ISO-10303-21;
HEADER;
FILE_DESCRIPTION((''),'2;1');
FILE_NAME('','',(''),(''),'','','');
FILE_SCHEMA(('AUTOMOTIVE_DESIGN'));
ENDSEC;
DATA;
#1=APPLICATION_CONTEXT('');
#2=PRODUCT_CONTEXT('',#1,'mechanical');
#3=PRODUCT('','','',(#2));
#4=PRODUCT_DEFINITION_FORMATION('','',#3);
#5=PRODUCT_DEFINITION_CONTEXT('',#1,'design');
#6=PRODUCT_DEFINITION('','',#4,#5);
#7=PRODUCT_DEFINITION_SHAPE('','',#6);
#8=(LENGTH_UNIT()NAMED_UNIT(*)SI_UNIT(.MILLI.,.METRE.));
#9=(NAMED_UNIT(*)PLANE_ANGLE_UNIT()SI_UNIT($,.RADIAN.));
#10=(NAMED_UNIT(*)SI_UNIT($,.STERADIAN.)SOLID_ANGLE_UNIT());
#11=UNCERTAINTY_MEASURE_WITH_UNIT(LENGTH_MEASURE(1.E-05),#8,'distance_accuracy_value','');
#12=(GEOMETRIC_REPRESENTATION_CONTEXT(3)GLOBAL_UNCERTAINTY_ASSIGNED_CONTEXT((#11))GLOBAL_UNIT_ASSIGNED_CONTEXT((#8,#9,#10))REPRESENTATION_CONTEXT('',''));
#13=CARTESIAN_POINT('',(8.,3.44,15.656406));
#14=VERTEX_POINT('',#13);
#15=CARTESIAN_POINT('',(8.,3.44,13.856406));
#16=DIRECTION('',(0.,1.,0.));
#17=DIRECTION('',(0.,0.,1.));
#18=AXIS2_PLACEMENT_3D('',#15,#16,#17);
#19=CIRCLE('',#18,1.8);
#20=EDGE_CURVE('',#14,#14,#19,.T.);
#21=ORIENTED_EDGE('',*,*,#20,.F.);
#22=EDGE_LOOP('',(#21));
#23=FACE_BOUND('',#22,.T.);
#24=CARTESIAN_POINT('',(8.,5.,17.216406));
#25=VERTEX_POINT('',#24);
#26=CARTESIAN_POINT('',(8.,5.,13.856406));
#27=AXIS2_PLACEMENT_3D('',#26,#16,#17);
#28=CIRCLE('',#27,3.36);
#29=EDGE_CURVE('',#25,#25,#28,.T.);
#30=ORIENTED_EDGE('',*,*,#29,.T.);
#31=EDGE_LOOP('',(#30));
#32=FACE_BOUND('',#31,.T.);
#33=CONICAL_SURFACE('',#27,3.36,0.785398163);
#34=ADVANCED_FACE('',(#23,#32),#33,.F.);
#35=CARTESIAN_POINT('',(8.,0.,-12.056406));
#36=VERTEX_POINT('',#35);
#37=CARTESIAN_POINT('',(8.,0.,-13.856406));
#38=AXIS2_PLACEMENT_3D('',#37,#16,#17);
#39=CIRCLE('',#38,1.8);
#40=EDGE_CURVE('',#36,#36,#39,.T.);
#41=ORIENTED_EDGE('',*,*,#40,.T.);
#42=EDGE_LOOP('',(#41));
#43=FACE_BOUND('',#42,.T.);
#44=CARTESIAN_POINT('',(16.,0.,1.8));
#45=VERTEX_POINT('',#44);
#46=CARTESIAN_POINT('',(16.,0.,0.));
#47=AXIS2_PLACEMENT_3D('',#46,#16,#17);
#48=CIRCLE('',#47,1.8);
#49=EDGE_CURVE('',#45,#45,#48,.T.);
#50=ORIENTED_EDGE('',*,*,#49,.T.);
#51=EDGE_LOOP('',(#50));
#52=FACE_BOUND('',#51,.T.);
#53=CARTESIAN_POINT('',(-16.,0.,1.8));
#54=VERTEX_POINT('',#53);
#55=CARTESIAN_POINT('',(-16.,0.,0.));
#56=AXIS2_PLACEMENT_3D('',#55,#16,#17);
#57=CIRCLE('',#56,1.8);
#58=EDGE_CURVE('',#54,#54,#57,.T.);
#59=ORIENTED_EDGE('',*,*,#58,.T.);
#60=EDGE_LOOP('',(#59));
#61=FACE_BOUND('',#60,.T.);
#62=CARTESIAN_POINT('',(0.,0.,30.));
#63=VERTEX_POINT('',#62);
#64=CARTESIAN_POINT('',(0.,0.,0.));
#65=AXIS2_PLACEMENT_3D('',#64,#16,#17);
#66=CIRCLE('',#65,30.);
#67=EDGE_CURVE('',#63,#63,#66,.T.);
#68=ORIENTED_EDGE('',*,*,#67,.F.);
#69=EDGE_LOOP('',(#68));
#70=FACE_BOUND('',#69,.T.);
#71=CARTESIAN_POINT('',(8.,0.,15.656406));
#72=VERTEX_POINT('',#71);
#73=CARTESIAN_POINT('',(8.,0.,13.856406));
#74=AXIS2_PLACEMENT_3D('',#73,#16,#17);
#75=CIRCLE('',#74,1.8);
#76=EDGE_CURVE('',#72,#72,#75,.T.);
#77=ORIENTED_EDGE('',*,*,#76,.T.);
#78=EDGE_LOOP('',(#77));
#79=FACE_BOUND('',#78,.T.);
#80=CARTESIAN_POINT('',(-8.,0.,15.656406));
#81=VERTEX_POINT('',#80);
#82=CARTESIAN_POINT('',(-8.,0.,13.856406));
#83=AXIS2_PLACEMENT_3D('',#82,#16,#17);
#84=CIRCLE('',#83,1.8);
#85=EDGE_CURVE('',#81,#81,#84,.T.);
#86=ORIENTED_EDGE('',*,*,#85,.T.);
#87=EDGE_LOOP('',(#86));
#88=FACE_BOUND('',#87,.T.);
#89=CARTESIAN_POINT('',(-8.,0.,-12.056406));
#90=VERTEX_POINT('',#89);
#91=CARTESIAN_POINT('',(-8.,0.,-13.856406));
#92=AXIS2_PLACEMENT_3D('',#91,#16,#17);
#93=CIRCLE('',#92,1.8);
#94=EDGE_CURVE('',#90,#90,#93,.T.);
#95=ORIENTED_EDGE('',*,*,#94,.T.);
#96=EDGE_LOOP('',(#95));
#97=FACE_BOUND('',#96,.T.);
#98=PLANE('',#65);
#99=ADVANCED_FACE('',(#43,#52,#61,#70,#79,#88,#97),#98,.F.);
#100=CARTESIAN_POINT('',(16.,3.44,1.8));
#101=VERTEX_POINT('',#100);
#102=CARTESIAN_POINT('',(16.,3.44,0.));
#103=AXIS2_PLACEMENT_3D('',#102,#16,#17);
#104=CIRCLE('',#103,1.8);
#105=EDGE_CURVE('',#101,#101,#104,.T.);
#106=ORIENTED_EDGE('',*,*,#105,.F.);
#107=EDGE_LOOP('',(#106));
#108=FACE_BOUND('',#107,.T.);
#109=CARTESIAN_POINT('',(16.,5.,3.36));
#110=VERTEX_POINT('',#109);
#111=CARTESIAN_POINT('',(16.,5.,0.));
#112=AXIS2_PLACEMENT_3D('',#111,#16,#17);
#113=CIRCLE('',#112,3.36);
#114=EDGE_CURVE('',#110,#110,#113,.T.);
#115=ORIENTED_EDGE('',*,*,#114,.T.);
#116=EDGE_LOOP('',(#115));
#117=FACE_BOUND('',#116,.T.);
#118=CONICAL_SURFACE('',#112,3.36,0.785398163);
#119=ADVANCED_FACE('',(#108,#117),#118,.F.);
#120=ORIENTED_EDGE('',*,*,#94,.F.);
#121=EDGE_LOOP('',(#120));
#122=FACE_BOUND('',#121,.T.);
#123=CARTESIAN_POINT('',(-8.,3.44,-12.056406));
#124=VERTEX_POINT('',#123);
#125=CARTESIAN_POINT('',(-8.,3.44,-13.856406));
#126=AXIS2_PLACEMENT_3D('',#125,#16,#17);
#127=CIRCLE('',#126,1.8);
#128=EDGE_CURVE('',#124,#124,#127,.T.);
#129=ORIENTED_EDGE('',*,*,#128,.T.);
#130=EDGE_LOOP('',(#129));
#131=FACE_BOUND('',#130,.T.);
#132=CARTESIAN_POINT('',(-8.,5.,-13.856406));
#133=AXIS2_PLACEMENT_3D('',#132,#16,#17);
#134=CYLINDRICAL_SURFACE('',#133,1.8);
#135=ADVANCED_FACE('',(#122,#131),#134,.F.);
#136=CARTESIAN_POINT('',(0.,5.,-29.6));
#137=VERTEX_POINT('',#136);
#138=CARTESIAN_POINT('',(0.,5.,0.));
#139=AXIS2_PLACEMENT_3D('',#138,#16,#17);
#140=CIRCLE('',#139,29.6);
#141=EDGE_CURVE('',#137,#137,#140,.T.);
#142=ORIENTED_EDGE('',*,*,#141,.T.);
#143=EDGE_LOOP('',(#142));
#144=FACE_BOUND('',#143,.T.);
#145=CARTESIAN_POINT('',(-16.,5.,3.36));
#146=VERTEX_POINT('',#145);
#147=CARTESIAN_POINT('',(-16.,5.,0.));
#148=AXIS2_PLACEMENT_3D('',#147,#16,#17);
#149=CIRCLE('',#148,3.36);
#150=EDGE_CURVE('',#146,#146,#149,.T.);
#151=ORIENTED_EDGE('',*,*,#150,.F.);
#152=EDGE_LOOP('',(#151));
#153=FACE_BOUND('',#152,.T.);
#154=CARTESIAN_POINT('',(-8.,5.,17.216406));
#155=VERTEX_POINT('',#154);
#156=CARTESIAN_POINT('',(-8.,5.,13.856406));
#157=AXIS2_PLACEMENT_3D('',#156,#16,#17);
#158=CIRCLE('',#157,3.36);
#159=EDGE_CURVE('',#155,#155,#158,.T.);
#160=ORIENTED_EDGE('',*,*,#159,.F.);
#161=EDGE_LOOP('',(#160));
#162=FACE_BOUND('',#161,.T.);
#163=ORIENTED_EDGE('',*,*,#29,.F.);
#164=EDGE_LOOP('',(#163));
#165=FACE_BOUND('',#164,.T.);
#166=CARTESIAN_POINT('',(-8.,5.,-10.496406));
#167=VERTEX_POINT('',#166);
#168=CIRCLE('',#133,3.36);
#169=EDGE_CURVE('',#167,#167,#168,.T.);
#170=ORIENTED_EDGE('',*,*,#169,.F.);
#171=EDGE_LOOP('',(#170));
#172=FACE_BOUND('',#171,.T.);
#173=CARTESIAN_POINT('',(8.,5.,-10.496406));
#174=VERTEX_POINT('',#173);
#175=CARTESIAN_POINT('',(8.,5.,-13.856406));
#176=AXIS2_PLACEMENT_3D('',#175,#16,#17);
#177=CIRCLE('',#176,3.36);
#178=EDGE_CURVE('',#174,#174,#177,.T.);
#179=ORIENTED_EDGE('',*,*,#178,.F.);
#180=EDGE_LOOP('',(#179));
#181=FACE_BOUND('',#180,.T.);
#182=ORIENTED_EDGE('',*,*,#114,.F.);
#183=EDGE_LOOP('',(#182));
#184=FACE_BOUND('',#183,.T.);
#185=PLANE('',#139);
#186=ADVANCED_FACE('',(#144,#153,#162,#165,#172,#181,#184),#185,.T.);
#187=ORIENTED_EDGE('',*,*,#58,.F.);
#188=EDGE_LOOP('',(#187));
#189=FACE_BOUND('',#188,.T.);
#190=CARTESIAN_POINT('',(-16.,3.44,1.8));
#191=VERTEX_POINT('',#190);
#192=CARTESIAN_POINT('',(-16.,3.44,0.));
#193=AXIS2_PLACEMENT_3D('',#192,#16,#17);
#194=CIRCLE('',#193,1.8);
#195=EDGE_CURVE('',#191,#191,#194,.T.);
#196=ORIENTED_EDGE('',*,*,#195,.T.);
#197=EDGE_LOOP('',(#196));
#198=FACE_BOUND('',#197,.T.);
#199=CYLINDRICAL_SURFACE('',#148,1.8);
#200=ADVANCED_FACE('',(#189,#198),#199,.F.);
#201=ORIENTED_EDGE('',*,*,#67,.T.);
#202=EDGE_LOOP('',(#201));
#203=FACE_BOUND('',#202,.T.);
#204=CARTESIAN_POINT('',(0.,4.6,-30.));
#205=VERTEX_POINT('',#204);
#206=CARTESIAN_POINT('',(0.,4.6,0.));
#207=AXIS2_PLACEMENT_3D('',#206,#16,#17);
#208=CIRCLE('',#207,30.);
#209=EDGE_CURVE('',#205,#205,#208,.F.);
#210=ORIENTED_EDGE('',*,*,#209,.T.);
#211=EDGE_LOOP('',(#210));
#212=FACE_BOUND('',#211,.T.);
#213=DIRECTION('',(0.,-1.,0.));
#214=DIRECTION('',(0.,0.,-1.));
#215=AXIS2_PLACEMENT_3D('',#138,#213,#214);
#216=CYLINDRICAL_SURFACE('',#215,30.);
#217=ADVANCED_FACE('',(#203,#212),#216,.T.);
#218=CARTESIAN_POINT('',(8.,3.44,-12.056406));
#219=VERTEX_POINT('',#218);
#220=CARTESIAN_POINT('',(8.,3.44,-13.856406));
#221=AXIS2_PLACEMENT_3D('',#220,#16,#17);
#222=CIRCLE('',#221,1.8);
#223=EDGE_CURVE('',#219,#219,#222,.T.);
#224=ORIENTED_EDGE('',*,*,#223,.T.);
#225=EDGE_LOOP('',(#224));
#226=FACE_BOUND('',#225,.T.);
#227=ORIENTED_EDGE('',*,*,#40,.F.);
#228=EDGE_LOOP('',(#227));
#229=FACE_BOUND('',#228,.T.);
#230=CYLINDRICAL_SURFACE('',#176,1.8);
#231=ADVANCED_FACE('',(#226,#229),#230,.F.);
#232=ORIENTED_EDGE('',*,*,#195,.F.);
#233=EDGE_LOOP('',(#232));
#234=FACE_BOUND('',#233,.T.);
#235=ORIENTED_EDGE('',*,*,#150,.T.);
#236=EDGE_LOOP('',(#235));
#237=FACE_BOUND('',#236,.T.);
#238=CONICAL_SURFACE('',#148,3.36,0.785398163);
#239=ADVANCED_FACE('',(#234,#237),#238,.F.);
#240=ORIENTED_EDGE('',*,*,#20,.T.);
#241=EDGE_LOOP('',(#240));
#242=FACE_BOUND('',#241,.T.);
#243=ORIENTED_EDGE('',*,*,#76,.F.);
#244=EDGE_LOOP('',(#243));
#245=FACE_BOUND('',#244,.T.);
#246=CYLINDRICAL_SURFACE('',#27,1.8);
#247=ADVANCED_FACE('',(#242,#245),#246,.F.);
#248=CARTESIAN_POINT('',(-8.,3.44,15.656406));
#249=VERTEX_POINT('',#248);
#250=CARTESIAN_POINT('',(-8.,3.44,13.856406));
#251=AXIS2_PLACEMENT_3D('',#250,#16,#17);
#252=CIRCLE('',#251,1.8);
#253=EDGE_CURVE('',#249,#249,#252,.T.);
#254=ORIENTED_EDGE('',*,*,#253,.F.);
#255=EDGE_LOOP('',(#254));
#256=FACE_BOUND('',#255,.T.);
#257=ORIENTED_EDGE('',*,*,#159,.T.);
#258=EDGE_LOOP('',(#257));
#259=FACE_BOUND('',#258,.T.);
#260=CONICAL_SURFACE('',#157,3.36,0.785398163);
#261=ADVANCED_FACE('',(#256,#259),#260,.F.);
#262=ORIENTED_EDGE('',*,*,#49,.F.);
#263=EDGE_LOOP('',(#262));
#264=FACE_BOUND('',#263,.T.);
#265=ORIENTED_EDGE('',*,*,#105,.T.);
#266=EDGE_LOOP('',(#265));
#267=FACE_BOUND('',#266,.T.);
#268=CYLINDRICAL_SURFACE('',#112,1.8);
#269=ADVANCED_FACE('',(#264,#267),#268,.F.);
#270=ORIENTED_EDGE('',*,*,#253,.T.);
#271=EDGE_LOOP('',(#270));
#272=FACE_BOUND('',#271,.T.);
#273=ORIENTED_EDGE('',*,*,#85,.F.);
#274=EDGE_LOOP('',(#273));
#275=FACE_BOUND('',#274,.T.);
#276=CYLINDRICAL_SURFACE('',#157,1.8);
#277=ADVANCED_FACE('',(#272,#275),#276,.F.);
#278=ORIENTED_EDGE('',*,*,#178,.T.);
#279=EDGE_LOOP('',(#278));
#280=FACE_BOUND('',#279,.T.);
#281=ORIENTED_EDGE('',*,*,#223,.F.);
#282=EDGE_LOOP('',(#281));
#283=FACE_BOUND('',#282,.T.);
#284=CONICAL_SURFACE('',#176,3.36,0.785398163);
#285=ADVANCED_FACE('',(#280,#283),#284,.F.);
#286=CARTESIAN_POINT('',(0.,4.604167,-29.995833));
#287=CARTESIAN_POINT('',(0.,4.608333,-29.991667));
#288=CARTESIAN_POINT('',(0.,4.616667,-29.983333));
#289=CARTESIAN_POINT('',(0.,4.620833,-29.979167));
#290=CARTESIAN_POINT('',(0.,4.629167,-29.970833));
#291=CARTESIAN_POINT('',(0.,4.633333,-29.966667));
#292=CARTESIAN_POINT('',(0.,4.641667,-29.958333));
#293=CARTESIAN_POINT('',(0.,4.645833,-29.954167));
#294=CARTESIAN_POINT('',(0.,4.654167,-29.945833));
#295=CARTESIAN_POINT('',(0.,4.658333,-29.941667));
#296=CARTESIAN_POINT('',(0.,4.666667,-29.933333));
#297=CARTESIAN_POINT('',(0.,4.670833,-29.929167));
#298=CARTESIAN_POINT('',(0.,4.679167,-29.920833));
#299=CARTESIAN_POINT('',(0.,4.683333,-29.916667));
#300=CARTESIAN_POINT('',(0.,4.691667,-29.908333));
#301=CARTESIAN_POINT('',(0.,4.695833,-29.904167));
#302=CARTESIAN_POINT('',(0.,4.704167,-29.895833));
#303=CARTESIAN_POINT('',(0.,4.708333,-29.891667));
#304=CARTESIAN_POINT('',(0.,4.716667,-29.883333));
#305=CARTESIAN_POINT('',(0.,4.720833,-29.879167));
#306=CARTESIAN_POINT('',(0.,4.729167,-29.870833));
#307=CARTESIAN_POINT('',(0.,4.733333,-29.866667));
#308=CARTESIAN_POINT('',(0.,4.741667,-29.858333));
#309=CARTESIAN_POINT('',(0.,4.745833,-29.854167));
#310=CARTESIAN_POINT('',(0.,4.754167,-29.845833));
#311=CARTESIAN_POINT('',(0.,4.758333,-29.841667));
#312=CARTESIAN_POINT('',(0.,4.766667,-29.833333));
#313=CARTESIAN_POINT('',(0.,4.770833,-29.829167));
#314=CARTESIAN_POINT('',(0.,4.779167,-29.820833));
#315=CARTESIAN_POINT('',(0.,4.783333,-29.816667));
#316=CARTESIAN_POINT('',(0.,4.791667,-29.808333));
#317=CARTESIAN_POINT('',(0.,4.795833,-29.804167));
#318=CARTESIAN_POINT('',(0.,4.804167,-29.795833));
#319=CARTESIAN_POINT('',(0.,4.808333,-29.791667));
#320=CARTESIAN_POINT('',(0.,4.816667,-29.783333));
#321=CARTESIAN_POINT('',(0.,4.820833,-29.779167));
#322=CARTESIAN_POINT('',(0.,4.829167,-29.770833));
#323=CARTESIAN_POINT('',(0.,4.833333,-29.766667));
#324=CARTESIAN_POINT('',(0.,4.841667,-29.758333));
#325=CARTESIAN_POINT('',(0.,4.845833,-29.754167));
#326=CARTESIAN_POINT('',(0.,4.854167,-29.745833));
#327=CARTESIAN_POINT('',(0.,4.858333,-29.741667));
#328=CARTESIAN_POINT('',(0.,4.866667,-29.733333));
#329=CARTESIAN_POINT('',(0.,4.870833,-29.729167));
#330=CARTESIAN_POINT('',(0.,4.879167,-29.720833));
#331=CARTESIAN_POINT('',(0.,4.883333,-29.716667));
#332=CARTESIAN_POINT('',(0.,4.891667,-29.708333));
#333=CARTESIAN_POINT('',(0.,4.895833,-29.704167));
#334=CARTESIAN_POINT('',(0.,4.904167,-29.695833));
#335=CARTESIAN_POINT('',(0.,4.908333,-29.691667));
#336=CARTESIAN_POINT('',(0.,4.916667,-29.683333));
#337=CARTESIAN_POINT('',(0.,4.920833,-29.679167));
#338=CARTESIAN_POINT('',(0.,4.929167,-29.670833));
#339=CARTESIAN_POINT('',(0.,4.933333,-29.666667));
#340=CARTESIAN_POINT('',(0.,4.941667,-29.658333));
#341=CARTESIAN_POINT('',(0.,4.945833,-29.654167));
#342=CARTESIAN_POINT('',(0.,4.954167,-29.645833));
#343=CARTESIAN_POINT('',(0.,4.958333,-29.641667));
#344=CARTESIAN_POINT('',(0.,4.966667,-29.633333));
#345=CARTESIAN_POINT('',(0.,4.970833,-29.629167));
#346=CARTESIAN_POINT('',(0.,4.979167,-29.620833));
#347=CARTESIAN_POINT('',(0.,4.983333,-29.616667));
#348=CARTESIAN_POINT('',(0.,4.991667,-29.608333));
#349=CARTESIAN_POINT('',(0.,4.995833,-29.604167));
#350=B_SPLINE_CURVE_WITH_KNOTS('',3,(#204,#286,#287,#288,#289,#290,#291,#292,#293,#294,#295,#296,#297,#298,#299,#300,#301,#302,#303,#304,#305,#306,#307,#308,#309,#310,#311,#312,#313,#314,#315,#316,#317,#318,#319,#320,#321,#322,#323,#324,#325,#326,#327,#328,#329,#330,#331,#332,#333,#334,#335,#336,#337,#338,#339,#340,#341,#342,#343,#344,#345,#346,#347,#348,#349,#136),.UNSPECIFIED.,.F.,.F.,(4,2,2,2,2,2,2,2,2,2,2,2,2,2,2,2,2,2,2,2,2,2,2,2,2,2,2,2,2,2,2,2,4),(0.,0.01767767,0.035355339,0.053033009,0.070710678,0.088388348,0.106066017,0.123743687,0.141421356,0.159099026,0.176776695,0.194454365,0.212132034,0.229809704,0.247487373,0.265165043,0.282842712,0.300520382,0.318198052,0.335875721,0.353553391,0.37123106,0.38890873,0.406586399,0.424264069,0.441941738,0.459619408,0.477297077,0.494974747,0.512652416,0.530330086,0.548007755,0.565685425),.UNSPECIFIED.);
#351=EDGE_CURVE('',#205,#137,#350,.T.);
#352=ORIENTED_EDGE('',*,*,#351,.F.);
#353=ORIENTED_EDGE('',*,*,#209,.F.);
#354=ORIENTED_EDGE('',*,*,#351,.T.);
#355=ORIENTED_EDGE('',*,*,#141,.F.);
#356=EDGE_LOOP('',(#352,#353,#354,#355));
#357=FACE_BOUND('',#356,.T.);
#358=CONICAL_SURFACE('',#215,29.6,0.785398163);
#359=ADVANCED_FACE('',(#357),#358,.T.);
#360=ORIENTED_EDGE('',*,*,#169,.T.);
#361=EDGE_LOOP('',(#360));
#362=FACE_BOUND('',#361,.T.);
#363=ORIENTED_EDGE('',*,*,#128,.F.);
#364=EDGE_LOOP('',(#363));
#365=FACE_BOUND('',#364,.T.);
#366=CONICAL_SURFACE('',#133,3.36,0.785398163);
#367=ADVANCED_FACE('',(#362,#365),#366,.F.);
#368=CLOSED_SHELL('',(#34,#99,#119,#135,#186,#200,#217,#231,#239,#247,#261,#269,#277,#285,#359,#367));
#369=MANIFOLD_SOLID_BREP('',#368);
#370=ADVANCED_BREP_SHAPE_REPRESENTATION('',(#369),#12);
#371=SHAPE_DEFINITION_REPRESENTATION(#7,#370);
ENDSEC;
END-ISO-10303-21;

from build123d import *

# Parameters (mm, degrees)
SKETCH1_R           = 30
BOSS_EXTRUDE1_DEPTH = 5
CHAMFER1_SIZE       = 0.4


# Read off the part's stored shape, not the designer's step: CSK for M3 Hex Socket Countersunk Cap Screw1
with BuildPart() as part:
    # Sketch1 → Boss-Extrude1 (new body)
    with BuildSketch(Plane(origin=(0, 0, 0), x_dir=(1, 0, 0), z_dir=(0, 1, 0))):
        with Locations(Location((0, 0, 0), (0, 0, 270))):
            Circle(SKETCH1_R)
    extrude(amount=BOSS_EXTRUDE1_DEPTH)

    # CSK for M3 Hex Socket Countersunk Ca 2 → CSK for M3 Hex Socket Countersunk Cap Screw1 (revolve, cut)
    with BuildSketch(Plane(origin=(8, 0, 13.856406461), x_dir=(1, 0, 0), z_dir=(0, 0, 1))):
        Polygon((0, 0), (1.8, 0), (1.8, 3.44), (3.36, 5), (0, 5), align=None)
    revolve(axis=Axis((8, 0, 13.856406461), (0, 1, 0)), mode=Mode.SUBTRACT)

    # CSK for M3 Hex Socket Countersunk Ca 3 o → CSK for M3 Hex Socket Countersunk Ca 3 (revolve, cut)
    with BuildSketch(Plane(origin=(-8, 0, 13.856406461), x_dir=(1, 0, 0), z_dir=(0, 0, 1))):
        Polygon((0, 0), (1.8, 0), (1.8, 3.44), (3.36, 5), (0, 5), align=None)
    revolve(axis=Axis((-8, 0, 13.856406461), (0, 1, 0)), mode=Mode.SUBTRACT)

    # CSK for M3 Hex Socket Countersunk Ca 4 o → CSK for M3 Hex Socket Countersunk Ca 4 (revolve, cut)
    with BuildSketch(Plane(origin=(-16, 0, 0), x_dir=(1, 0, 0), z_dir=(0, 0, 1))):
        Polygon((0, 0), (1.8, 0), (1.8, 3.44), (3.36, 5), (0, 5), align=None)
    revolve(axis=Axis((-16, 0, 0), (0, 1, 0)), mode=Mode.SUBTRACT)

    # CSK for M3 Hex Socket Countersunk Ca 5 o → CSK for M3 Hex Socket Countersunk Ca 5 (revolve, cut)
    with BuildSketch(Plane(origin=(-8, 0, -13.856406461), x_dir=(1, 0, 0), z_dir=(0, 0, 1))):
        Polygon((0, 0), (1.8, 0), (1.8, 3.44), (3.36, 5), (0, 5), align=None)
    revolve(axis=Axis((-8, 0, -13.856406461), (0, 1, 0)), mode=Mode.SUBTRACT)

    # CSK for M3 Hex Socket Countersunk Ca 6 o → CSK for M3 Hex Socket Countersunk Ca 6 (revolve, cut)
    with BuildSketch(Plane(origin=(8, 0, -13.856406461), x_dir=(1, 0, 0), z_dir=(0, 0, 1))):
        Polygon((0, 0), (1.8, 0), (1.8, 3.44), (3.36, 5), (0, 5), align=None)
    revolve(axis=Axis((8, 0, -13.856406461), (0, 1, 0)), mode=Mode.SUBTRACT)

    # CSK for M3 Hex Socket Countersunk Ca 7 o → CSK for M3 Hex Socket Countersunk Ca 7 (revolve, cut)
    with BuildSketch(Plane(origin=(16, 0, 0), x_dir=(1, 0, 0), z_dir=(0, 0, 1))):
        Polygon((0, 0), (1.8, 0), (1.8, 3.44), (3.36, 5), (0, 5), align=None)
    revolve(axis=Axis((16, 0, 0), (0, 1, 0)), mode=Mode.SUBTRACT)

    # Chamfer1
    chamfer1_edges = [part.edges().sort_by_distance(p)[0] for p in [
        (0, 5, -30),
    ]]
    chamfer(chamfer1_edges, length=CHAMFER1_SIZE)


solid = part.part
